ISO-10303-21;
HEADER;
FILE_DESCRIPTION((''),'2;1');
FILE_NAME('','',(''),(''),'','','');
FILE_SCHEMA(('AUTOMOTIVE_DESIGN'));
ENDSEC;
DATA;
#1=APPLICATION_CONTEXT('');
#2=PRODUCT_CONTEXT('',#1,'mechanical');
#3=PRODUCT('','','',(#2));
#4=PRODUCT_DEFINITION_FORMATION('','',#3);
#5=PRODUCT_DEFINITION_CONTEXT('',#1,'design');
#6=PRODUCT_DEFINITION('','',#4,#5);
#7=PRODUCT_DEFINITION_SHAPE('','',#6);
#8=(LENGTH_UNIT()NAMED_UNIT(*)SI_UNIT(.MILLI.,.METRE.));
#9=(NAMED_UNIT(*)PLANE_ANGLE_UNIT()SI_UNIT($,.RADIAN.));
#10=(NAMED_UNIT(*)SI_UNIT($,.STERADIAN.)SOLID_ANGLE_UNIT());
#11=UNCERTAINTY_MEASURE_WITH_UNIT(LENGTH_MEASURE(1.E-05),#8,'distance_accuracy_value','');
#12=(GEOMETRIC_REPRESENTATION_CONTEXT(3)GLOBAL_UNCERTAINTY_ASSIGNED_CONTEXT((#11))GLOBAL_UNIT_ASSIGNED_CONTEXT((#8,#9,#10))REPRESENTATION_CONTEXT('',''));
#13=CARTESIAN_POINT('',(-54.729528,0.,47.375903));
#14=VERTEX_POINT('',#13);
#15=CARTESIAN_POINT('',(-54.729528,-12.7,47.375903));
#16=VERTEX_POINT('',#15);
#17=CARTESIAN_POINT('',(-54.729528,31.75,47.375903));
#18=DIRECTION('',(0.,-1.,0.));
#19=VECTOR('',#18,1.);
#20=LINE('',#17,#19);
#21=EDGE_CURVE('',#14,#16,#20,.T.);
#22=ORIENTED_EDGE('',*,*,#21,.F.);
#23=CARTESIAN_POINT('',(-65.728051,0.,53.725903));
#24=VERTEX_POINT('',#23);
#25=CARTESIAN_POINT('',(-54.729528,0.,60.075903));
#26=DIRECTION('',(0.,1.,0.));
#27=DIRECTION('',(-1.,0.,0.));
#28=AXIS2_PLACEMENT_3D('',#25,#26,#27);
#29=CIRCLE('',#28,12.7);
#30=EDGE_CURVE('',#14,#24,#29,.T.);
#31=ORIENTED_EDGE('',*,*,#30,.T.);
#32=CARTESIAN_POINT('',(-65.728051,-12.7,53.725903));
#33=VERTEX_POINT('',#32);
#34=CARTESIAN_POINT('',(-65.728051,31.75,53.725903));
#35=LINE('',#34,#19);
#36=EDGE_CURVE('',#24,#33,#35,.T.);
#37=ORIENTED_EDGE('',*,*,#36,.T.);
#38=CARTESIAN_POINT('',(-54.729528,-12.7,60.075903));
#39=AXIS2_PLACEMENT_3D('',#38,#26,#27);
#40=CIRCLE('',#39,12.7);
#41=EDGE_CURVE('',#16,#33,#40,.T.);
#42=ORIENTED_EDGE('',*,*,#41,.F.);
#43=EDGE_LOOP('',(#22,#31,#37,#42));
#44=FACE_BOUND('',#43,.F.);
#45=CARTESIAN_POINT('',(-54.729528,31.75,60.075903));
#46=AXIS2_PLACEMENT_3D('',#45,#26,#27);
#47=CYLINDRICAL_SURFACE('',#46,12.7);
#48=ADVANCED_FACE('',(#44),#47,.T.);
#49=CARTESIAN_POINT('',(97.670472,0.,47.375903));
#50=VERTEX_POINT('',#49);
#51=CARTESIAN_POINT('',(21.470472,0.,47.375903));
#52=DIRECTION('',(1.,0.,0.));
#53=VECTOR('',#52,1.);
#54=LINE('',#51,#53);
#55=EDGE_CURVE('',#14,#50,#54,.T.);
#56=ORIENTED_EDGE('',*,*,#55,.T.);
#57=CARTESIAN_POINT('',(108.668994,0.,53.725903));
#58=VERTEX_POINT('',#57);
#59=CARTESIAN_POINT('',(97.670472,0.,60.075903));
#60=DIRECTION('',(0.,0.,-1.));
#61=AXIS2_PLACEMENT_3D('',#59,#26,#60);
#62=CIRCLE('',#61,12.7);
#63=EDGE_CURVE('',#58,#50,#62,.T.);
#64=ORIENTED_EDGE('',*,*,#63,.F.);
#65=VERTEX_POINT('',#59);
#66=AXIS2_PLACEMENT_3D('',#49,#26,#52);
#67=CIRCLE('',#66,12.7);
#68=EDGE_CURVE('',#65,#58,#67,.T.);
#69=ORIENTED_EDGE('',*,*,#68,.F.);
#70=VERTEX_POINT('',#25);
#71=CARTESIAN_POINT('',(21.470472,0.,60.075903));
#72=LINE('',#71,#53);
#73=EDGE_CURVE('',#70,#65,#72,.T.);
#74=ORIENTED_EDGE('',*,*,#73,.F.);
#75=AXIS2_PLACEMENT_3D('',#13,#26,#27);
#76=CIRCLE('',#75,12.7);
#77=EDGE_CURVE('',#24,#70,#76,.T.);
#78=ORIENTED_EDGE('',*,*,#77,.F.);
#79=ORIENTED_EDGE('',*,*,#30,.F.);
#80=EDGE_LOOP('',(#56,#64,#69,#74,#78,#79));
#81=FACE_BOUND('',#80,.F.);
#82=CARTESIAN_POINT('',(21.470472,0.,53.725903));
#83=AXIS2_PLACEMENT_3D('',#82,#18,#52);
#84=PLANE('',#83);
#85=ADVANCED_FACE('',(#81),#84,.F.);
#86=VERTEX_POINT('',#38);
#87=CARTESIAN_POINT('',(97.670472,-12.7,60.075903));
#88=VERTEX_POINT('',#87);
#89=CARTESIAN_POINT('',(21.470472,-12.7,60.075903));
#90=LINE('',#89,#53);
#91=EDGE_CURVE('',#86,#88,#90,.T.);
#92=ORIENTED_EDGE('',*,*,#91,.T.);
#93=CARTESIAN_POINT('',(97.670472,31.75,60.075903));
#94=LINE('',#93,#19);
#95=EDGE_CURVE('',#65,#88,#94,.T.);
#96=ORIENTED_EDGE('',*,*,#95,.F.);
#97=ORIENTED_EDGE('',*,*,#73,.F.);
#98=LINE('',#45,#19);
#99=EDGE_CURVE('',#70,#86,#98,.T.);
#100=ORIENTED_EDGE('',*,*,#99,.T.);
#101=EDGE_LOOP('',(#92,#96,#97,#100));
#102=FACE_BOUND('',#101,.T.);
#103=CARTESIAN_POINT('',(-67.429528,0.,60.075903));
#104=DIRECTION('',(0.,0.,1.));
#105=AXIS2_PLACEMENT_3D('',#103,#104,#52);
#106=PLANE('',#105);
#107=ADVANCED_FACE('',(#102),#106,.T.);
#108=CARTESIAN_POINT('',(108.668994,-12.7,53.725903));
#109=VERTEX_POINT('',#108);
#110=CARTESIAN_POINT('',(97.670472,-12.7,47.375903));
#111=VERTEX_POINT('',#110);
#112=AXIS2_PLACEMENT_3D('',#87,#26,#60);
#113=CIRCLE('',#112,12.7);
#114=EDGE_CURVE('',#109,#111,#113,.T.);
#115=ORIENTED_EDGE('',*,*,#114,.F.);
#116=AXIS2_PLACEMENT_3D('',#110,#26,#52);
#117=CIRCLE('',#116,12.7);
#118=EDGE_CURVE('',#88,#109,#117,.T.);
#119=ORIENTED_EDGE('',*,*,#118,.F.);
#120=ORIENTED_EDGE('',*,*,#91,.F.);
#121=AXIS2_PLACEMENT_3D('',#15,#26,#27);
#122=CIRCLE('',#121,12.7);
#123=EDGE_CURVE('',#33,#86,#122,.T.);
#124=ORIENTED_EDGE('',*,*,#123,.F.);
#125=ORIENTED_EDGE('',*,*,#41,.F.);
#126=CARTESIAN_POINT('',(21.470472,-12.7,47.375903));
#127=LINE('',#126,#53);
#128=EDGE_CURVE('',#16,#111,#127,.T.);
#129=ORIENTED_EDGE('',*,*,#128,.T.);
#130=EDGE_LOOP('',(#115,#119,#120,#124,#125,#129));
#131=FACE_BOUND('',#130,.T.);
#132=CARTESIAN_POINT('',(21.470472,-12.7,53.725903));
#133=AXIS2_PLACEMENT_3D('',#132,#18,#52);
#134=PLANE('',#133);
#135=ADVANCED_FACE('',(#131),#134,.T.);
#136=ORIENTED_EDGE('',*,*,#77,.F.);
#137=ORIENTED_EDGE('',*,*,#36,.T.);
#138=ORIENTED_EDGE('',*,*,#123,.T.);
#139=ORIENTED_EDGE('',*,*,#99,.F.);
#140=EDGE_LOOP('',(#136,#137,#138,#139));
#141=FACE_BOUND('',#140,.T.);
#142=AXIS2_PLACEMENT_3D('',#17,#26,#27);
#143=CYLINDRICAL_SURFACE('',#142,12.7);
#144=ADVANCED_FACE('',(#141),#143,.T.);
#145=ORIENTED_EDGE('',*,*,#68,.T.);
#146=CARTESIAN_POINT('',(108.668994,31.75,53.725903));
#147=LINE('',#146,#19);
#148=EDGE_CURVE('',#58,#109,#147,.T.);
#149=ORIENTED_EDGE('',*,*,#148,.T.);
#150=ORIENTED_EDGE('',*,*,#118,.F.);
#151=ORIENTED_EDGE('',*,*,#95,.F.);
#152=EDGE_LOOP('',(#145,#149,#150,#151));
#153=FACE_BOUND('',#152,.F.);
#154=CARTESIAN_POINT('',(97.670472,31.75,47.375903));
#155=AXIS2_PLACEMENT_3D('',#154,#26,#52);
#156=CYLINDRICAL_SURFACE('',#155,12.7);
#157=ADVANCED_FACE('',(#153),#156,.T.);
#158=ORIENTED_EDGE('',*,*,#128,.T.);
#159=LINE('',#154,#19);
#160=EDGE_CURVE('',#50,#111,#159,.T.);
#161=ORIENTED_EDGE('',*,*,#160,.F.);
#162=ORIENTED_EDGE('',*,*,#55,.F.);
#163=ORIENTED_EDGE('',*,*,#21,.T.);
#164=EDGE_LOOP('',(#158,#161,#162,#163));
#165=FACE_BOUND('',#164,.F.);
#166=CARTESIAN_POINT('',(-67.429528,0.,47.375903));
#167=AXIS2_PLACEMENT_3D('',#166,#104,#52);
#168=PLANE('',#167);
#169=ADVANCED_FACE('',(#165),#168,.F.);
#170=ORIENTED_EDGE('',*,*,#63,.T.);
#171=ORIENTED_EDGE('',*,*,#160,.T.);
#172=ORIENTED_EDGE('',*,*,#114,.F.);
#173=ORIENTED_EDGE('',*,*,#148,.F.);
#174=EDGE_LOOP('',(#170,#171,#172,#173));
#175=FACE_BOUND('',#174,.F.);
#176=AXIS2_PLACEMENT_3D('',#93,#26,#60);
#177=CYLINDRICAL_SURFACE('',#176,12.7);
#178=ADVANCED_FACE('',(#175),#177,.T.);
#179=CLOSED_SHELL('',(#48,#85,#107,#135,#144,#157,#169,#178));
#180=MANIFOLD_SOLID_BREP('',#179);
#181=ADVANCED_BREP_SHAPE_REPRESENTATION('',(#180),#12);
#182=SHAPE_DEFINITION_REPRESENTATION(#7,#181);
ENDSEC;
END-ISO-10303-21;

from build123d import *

# Parameters (mm, degrees)
F0_W        = 177.8
F0_H        = 12.7
F1_DEPTH    = 12.7
F2_T1_DEPTH = 76.2


# Not quite as in the source:
# - a fillet or chamfer that OpenCascade refuses, or shapes differently, is made with other operations: its cross-section is extruded or revolved along the edge and cut away or added


with BuildPart() as f1:
    # F0 (on Front) → F1 (new body)
    with BuildSketch(Plane.XZ):
        with Locations((21.4704718173, 53.7259025425)):
            Rectangle(F0_W, F0_H)
    extrude(amount=F1_DEPTH)

    # F2: fillet of radius 12.7 on 4 edges, made by hand

    # F2_s2 → F2_t1 (cut)
    with BuildSketch(Plane.XZ.offset(-31.75)):
        with BuildLine():
            ThreePointArc((-67.4295281827, 47.3759025425), (-63.7097843038, 56.3561586636), (-54.7295281827, 60.0759025425))
            Line((-54.7295281827, 60.0759025425), (-67.4295281827, 60.0759025425))
            Line((-67.4295281827, 60.0759025425), (-67.4295281827, 47.3759025425))
        make_face()
        with BuildLine():
            ThreePointArc((110.3704718173, 47.3759025425), (106.6507279383, 56.3561586636), (97.6704718173, 60.0759025425))
            Line((97.6704718173, 60.0759025425), (110.3704718173, 60.0759025425))
            Line((110.3704718173, 60.0759025425), (110.3704718173, 47.3759025425))
        make_face()
        with BuildLine():
            ThreePointArc((97.6704718173, 47.3759025425), (106.6507279383, 51.0956464214), (110.3704718173, 60.0759025425))
            Line((110.3704718173, 60.0759025425), (110.3704718173, 47.3759025425))
            Line((110.3704718173, 47.3759025425), (97.6704718173, 47.3759025425))
        make_face()
        with BuildLine():
            ThreePointArc((-67.4295281827, 60.0759025425), (-63.7097843038, 51.0956464214), (-54.7295281827, 47.3759025425))
            Line((-54.7295281827, 47.3759025425), (-67.4295281827, 47.3759025425))
            Line((-67.4295281827, 47.3759025425), (-67.4295281827, 60.0759025425))
        make_face()
    extrude(amount=F2_T1_DEPTH, mode=Mode.SUBTRACT)


solid = f1.part
